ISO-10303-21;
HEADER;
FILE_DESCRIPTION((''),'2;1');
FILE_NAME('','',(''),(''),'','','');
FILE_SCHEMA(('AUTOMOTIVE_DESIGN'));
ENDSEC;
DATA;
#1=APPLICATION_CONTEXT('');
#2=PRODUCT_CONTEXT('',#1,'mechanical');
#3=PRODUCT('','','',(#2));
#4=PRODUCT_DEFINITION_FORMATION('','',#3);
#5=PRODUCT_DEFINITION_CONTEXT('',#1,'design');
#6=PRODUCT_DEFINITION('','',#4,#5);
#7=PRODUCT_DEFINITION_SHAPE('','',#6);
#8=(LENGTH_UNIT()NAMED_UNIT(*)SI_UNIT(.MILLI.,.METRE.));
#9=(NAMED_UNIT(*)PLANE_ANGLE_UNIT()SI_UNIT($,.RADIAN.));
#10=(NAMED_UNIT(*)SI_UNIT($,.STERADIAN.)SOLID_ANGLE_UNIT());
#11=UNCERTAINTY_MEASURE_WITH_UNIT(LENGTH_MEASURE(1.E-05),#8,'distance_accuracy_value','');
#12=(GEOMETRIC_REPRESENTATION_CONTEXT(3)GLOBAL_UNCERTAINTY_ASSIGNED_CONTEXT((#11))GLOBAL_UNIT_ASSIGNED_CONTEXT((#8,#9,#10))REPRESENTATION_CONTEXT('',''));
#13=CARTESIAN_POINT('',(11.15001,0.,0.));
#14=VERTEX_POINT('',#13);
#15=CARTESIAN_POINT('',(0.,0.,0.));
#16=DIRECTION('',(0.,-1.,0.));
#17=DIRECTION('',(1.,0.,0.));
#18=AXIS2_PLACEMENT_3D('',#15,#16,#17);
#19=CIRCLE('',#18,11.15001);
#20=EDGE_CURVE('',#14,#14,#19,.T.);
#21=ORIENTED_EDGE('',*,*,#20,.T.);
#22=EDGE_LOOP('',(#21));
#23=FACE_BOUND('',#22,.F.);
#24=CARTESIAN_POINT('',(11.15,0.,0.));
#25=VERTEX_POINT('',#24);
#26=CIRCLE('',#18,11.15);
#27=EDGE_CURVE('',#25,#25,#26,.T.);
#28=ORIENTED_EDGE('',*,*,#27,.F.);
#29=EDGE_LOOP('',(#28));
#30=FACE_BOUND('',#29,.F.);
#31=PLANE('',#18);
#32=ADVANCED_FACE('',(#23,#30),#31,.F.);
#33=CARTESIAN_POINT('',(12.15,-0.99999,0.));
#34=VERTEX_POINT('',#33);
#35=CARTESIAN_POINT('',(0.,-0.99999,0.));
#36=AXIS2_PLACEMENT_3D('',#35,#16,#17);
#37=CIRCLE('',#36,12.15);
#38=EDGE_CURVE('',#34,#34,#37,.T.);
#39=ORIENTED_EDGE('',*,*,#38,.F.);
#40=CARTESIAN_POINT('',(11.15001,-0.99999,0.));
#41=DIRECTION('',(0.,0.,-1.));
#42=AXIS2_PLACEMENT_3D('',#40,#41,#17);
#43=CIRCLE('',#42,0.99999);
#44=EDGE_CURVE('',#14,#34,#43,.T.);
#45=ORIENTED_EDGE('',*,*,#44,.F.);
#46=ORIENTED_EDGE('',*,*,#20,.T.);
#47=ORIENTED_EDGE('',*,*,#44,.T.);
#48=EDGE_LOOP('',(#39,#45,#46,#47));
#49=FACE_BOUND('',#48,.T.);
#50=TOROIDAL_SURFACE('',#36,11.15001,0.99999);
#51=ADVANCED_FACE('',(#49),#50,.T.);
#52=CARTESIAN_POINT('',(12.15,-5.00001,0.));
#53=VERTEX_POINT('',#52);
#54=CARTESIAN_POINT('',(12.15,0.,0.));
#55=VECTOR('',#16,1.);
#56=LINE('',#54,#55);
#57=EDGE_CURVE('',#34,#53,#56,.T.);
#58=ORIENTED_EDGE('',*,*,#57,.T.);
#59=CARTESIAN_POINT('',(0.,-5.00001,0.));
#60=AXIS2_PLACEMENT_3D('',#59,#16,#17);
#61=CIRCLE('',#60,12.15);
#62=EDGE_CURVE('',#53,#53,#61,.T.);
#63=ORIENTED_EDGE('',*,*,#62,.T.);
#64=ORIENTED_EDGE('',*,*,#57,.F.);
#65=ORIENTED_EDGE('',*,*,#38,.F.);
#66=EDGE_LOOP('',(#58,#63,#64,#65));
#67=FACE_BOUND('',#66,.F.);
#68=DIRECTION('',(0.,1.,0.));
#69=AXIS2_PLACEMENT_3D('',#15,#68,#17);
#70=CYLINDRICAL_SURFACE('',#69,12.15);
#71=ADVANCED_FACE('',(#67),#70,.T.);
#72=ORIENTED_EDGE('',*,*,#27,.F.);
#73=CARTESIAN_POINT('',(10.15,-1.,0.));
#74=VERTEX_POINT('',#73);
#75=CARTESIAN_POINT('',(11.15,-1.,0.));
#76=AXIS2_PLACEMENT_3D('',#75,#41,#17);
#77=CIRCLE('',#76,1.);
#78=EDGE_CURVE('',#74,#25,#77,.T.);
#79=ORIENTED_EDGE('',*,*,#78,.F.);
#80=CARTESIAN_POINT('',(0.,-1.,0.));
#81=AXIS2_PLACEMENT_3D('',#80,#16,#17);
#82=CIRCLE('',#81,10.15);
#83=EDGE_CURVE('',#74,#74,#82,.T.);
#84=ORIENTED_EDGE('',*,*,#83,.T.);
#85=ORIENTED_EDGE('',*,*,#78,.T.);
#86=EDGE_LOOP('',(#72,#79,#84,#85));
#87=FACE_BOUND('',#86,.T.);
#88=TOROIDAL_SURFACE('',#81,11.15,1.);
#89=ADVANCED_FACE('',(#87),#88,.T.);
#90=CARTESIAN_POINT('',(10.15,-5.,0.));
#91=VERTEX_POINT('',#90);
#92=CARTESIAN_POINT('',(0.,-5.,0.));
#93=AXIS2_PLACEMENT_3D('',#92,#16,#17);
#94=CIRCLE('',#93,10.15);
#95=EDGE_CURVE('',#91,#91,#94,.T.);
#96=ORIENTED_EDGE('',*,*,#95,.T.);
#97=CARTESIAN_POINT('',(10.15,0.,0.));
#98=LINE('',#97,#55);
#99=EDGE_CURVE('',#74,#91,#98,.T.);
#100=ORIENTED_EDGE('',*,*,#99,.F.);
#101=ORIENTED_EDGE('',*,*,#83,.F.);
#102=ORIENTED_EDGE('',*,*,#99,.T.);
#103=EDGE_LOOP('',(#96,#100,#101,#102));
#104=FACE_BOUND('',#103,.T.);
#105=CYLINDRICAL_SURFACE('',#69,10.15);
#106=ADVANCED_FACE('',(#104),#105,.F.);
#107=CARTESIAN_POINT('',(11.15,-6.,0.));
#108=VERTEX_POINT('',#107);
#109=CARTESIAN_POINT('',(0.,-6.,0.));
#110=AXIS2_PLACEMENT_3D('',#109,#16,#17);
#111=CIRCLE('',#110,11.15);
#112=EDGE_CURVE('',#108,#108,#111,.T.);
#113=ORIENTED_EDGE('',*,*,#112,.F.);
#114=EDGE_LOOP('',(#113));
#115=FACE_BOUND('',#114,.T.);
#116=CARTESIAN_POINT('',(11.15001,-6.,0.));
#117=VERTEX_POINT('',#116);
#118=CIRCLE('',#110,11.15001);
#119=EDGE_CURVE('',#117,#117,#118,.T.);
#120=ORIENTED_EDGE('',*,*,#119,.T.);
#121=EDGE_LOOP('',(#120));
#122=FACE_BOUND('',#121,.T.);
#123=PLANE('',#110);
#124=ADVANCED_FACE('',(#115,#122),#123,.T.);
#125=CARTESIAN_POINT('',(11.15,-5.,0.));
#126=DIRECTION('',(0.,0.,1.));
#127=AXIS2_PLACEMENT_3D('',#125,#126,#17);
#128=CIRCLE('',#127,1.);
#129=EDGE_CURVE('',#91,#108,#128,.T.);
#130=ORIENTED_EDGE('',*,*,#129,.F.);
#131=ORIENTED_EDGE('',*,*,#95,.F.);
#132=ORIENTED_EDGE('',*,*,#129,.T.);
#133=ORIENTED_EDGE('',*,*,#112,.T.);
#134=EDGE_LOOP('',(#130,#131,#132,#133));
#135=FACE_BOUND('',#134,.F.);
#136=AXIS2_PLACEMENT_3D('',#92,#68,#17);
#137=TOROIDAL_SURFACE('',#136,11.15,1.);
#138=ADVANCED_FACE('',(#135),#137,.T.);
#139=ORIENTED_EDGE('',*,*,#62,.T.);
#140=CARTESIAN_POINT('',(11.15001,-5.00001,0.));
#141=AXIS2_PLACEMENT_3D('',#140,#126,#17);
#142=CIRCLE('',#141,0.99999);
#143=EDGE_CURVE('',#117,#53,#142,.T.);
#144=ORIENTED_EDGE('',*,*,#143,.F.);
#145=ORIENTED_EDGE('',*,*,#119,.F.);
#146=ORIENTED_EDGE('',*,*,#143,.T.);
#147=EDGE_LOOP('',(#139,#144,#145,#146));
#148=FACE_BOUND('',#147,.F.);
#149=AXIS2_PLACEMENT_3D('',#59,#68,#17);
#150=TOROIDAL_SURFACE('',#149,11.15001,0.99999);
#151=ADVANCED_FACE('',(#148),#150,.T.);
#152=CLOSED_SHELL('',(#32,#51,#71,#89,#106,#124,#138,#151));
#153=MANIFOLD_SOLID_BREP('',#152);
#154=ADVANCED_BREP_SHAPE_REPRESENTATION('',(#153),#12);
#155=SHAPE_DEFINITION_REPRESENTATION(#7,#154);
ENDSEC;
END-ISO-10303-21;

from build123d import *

# Parameters (mm, degrees)
F0_R     = 12.15
F0_R_2   = 10.15
F1_DEPTH = 6
F2_R     = 1
F3_R     = 0.99999


# Not quite as in the source:
# - a fillet or chamfer is up to 0.001 mm smaller than in the source, because OpenCascade refuses the exact size


with BuildPart() as f1:
    # F0 (on Front) → F1 (new body)
    with BuildSketch(Plane.XZ):
        Circle(F0_R)
        Circle(F0_R_2, mode=Mode.SUBTRACT)
    extrude(amount=F1_DEPTH)

    # F2
    f2_edges = [f1.edges().sort_by_distance(p)[0] for p in [
        (-10.15, -6, 0),
        (-10.15, 0, 0),
    ]]
    fillet(f2_edges, radius=F2_R)

    # F3 (radius 1 in the source; OpenCascade refuses exactly that, so slightly less here)
    f3_edges = [f1.edges().sort_by_distance(p)[0] for p in [
        (-12.15, 0, 0),
        (-12.15, -6, 0),
    ]]
    fillet(f3_edges, radius=F3_R)


solid = f1.part
